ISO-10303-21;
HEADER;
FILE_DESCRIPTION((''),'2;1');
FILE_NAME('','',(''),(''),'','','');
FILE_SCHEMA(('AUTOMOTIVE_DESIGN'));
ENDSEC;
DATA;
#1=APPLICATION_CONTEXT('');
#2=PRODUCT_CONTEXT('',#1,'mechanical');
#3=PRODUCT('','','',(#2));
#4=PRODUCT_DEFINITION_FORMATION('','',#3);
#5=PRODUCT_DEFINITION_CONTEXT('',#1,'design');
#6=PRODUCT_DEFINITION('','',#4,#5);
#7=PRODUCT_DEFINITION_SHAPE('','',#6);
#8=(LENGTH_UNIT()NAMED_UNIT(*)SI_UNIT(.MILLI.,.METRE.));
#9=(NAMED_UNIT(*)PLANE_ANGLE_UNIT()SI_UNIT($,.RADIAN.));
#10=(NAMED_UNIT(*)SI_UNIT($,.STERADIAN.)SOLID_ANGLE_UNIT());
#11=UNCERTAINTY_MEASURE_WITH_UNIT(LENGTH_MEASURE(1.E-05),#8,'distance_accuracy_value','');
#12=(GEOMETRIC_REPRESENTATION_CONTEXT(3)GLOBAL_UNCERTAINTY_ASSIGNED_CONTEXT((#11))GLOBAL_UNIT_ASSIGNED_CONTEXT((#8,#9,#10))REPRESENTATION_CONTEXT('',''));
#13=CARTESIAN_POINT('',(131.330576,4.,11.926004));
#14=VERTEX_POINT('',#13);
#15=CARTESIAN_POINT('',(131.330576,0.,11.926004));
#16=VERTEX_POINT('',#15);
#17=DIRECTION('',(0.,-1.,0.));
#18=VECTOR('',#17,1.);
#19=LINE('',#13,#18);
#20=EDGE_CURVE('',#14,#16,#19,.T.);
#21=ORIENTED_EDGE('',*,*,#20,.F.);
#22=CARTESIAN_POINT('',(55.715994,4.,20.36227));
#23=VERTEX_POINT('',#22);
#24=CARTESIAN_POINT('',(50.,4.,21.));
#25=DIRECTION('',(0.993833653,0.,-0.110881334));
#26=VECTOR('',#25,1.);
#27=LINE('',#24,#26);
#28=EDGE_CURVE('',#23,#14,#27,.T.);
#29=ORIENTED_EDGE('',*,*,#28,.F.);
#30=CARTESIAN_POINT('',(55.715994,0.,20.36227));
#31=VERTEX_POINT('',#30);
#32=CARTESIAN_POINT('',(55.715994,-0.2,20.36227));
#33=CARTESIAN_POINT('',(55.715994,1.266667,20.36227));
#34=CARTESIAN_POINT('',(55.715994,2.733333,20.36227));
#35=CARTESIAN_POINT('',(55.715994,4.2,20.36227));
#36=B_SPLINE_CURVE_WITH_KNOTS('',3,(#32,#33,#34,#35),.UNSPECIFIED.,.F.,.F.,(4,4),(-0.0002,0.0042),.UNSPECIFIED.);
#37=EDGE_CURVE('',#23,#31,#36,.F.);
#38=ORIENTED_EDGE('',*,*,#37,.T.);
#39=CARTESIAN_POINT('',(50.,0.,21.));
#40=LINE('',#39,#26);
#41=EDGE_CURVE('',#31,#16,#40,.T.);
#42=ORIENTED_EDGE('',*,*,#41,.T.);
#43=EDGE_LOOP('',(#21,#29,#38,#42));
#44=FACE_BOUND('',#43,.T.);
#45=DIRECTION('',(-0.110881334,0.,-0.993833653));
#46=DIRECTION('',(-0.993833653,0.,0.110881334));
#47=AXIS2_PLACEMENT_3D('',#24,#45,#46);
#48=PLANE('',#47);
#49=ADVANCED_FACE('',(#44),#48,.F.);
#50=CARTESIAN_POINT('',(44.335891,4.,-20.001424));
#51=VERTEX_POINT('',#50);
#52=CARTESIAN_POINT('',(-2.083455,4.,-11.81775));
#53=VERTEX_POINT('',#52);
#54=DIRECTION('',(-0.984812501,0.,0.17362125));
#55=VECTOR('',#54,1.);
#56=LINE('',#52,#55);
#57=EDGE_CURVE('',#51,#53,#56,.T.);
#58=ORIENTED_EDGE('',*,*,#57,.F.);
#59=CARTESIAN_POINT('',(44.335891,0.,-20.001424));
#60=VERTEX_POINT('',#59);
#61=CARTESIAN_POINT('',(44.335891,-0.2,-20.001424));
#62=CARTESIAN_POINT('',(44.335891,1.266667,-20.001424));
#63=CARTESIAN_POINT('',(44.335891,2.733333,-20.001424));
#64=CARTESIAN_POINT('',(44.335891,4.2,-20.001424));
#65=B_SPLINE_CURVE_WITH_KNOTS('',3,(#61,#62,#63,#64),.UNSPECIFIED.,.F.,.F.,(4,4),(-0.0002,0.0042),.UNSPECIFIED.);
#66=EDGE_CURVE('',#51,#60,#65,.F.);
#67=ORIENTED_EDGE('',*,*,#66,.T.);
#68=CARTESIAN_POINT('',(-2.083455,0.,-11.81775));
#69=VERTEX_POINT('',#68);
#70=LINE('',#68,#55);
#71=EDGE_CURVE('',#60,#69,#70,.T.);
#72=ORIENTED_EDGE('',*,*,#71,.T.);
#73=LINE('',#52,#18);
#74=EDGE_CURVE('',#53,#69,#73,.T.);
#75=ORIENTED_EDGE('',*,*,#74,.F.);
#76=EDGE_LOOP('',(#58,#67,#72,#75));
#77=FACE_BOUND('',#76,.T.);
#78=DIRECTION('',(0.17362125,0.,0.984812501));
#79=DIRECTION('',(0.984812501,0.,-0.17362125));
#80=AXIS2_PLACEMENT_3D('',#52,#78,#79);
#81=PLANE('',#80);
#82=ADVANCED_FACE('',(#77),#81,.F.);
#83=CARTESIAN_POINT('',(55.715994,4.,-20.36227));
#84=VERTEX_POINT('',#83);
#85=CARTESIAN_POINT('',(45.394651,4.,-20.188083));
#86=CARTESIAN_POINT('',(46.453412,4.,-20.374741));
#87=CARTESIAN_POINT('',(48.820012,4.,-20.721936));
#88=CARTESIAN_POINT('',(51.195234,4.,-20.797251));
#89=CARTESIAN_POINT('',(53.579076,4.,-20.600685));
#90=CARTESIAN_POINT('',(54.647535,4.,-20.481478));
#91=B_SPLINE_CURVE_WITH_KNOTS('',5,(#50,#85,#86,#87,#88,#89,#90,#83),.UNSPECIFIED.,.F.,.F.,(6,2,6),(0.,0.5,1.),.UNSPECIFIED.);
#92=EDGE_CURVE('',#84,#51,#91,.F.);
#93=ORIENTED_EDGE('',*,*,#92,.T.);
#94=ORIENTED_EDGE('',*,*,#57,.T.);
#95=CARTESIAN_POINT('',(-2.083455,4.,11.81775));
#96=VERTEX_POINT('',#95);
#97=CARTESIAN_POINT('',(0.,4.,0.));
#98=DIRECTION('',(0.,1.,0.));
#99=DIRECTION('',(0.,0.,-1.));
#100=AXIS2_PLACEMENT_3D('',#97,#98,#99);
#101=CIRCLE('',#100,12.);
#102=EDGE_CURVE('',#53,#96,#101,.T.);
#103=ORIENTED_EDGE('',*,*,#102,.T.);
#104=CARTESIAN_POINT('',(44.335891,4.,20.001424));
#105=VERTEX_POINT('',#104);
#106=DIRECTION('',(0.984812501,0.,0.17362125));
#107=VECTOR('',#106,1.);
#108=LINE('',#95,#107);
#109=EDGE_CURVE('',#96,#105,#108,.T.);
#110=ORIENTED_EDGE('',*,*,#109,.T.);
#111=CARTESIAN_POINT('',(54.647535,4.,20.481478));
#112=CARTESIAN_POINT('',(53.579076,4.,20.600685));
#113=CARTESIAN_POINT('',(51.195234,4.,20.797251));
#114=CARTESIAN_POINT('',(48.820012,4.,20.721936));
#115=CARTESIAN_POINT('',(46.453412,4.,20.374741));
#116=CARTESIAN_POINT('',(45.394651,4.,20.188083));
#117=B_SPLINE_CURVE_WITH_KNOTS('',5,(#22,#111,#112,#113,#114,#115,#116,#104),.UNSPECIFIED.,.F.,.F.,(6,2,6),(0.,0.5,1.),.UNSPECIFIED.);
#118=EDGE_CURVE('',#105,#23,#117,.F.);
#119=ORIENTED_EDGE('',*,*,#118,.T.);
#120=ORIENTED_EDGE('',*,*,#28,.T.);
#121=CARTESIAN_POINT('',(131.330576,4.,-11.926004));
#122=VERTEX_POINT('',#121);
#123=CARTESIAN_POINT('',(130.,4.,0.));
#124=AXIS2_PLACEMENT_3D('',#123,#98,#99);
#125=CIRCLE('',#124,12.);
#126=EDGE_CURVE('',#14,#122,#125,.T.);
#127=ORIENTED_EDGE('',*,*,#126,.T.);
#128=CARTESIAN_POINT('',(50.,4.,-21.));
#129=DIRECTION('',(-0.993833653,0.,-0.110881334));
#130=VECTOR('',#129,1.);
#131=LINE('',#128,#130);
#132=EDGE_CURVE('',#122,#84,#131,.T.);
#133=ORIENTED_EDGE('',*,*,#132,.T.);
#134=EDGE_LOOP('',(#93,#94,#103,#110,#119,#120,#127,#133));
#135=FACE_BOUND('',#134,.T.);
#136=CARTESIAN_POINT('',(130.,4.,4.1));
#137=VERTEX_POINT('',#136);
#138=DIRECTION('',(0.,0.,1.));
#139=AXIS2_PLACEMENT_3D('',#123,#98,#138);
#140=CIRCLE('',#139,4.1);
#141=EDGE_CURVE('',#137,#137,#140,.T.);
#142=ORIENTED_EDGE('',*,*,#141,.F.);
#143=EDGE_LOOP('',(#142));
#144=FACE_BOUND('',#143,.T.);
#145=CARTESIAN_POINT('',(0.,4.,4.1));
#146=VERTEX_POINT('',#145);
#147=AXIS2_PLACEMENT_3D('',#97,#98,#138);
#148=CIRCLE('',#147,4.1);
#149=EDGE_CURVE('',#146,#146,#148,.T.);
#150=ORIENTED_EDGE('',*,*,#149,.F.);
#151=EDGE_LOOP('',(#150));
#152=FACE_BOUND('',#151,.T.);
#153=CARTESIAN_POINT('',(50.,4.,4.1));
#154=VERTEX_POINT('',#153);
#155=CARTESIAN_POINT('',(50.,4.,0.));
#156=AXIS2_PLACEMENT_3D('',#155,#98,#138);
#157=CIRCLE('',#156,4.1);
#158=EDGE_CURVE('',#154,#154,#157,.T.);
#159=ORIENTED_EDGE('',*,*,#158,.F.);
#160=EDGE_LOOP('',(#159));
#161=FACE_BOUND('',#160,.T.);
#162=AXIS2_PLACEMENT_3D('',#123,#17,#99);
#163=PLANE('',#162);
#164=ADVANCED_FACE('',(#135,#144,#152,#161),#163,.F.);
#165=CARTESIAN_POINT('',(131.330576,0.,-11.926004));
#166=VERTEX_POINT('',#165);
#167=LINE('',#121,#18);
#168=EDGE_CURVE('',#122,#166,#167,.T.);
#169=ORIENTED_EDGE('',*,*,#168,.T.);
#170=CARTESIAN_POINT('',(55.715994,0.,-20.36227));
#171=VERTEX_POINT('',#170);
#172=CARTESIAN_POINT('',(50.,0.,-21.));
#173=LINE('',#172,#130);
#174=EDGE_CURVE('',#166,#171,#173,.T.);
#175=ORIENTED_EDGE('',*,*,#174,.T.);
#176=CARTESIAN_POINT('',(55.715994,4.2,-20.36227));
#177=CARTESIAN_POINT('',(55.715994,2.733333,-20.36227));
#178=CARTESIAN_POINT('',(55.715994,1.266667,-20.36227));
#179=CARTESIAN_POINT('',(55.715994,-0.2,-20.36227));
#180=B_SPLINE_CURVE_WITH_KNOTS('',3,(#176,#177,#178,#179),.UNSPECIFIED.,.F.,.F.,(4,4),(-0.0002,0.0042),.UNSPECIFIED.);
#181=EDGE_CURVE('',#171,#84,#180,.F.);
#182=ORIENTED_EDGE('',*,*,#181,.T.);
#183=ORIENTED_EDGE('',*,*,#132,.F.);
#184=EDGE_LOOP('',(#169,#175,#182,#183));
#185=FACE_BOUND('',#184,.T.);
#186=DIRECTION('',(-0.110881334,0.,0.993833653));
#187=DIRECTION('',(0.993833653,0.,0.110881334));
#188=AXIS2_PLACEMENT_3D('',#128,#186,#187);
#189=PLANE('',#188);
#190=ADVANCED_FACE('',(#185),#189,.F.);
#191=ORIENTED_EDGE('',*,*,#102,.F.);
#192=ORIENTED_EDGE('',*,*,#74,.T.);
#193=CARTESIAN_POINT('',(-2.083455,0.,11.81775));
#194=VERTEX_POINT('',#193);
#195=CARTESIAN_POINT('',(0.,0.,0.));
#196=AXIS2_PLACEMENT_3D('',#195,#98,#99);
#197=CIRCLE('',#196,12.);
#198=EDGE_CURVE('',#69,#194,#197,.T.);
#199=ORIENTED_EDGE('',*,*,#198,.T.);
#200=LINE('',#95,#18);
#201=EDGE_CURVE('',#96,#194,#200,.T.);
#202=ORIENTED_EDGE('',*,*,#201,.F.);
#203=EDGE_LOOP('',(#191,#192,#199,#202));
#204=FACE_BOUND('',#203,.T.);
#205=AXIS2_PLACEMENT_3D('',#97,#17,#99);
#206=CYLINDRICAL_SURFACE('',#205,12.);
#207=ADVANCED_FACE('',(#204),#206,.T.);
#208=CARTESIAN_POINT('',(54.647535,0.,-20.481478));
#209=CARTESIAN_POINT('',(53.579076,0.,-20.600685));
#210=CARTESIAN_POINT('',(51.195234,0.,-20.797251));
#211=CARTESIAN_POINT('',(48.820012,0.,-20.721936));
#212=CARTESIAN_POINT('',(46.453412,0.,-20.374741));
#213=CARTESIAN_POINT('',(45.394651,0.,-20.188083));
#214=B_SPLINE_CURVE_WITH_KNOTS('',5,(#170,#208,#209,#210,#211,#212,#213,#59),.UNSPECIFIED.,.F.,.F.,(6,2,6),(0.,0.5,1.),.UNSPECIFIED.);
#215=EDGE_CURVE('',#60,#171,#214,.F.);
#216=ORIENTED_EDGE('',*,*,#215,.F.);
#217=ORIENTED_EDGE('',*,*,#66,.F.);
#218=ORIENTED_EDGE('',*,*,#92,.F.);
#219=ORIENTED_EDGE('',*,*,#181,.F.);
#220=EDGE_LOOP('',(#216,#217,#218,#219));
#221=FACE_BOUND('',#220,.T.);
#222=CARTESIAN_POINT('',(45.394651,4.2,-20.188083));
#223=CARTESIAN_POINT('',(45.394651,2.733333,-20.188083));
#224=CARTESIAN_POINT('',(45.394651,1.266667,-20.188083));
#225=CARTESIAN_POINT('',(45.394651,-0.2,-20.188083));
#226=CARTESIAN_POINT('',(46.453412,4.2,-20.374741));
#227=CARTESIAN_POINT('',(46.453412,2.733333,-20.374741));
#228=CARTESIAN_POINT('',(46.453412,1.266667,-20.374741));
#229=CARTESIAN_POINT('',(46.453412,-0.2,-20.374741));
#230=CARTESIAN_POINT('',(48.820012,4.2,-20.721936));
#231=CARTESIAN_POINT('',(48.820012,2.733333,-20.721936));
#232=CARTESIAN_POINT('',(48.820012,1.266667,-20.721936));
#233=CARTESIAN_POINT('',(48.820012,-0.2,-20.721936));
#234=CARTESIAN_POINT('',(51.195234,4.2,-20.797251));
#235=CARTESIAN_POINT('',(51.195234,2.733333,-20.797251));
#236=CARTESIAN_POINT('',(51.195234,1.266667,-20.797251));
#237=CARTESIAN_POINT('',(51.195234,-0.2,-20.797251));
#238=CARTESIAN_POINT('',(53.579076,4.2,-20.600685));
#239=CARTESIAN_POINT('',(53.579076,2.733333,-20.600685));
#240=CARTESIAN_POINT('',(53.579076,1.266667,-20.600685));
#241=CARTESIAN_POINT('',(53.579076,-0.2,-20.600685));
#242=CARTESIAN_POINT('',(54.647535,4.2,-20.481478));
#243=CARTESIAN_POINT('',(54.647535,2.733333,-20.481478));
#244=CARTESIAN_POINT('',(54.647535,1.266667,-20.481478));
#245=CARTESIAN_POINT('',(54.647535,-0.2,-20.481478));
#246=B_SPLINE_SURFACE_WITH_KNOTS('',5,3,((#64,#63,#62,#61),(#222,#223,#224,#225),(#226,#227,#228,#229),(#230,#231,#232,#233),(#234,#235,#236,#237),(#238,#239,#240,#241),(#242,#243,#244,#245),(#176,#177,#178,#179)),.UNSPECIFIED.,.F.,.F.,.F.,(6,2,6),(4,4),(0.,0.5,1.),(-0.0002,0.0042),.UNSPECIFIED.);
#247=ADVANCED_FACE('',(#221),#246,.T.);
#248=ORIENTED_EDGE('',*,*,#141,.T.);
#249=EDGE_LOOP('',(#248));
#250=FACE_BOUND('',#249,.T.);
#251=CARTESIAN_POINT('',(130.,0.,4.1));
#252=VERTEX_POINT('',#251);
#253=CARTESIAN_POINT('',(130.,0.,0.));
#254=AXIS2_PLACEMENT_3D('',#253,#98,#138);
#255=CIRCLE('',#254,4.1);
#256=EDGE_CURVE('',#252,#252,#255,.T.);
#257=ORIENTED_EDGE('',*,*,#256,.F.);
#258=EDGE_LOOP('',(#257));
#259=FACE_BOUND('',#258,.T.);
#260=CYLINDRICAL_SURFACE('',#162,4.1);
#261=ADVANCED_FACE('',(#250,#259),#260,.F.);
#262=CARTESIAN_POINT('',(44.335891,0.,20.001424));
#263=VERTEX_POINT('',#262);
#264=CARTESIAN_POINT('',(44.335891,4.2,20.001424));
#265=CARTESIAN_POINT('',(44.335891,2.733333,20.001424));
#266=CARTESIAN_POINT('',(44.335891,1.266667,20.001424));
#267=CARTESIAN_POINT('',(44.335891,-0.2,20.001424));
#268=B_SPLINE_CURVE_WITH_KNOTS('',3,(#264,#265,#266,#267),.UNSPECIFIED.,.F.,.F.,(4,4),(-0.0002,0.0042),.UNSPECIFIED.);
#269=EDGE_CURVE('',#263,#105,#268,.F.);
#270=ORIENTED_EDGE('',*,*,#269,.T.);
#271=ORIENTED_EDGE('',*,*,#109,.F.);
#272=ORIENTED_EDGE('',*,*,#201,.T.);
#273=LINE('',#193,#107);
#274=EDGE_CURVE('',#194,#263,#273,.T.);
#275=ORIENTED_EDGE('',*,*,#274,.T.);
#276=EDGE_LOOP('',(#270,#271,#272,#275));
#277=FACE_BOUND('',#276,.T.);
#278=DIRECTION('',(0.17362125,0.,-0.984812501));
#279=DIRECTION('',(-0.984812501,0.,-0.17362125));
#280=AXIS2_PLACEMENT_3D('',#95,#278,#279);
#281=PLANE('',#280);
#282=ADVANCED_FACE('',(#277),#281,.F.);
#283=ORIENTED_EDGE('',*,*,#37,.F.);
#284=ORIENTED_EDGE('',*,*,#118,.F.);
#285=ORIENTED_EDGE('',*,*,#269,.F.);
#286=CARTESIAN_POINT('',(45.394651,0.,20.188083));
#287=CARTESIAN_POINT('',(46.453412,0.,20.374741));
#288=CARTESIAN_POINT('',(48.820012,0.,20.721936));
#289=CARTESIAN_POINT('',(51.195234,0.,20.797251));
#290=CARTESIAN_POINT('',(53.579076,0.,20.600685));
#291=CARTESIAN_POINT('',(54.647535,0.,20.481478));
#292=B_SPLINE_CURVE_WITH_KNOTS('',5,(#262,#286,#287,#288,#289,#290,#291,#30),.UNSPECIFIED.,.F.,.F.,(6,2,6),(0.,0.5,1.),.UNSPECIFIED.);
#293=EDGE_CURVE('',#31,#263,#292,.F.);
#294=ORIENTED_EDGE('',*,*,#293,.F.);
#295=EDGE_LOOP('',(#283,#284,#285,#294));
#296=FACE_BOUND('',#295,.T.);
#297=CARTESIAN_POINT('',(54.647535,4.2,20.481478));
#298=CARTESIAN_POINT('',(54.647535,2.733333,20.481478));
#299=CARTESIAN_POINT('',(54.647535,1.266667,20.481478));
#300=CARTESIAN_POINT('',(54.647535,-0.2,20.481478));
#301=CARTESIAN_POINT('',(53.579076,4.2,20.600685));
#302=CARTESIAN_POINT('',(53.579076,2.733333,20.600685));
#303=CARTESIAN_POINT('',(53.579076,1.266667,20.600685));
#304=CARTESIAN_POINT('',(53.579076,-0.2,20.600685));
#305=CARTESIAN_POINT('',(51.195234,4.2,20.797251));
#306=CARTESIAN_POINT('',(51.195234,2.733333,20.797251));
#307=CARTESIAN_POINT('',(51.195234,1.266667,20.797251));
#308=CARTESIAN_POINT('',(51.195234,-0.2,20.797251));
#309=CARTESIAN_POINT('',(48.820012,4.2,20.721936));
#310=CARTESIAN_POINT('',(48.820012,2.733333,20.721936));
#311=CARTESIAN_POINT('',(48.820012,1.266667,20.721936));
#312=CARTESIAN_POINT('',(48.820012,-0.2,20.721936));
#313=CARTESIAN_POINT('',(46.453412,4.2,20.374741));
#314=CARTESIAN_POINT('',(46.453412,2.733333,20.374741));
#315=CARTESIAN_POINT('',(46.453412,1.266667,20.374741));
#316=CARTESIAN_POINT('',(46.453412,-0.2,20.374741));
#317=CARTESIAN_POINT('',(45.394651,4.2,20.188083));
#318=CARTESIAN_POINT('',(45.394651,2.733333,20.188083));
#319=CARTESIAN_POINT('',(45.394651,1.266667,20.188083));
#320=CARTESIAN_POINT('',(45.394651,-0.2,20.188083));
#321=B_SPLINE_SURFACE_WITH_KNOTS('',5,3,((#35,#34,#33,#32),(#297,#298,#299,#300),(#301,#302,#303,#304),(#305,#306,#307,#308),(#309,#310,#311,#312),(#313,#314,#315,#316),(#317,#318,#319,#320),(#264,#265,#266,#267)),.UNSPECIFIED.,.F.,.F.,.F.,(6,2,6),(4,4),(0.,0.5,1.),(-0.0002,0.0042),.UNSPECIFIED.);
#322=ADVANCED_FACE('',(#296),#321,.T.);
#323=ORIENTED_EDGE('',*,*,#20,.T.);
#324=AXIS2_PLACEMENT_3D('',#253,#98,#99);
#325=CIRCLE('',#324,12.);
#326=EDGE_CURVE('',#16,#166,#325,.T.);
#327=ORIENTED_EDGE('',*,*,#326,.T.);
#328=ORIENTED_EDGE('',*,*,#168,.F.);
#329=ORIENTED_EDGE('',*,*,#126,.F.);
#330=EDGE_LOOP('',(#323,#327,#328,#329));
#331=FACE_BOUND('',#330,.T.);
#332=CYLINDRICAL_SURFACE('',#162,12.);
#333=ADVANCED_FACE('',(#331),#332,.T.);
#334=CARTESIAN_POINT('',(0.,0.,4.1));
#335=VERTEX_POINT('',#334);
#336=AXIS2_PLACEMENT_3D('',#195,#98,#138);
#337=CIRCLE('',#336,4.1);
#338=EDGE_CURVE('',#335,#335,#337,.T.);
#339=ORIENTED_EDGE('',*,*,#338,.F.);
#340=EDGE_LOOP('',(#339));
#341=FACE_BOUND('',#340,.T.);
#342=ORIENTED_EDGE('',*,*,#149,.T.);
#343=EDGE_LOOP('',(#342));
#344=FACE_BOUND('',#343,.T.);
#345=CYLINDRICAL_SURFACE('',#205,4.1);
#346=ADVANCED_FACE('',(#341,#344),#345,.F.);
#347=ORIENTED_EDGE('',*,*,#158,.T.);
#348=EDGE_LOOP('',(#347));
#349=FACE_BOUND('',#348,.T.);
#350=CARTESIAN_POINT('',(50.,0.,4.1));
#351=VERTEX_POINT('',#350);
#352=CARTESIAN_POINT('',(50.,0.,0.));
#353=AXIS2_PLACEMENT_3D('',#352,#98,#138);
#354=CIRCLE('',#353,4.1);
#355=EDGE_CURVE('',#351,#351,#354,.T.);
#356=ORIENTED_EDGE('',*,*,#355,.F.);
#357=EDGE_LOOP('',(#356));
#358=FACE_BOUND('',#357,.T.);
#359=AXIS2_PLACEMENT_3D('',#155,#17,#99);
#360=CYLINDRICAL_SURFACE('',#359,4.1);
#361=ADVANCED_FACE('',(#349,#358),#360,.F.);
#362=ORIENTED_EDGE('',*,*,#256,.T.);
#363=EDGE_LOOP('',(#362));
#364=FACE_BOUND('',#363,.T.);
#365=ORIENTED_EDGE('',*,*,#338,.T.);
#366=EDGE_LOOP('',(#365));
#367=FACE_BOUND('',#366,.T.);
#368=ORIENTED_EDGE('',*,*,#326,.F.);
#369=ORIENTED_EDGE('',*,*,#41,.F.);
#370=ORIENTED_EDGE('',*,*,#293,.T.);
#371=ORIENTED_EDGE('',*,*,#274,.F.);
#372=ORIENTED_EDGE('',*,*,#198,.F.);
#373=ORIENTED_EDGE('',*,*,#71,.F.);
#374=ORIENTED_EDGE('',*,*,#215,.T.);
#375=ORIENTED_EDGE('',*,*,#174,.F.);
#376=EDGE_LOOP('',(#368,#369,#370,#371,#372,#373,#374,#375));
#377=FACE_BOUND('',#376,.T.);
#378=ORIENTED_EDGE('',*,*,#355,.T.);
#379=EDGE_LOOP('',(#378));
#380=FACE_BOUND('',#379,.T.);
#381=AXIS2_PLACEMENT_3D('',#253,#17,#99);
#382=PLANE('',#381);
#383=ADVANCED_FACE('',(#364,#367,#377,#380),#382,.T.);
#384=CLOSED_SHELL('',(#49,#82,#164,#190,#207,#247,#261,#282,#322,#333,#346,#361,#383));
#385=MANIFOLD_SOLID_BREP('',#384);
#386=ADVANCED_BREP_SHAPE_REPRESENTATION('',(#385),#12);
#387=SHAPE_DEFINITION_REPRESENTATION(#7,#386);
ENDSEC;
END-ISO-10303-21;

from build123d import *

# Parameters (mm, degrees)
SKETCH_1_R      = 4.1
EXTRUDE_1_DEPTH = 4


with BuildPart() as part:
    # 草图1 → 凸台-拉伸1 (new body)
    with BuildSketch(Plane(origin=(0, 0, 0), x_dir=(1, 0, 0), z_dir=(0, 1, 0))):
        with BuildLine():
            Line((-2.083455003, 11.817750008), (50, 21))
            Line((50, 21), (131.330576007, 11.926003836))
            ThreePointArc((131.330576007, 11.926003836), (142, 0), (131.330576007, -11.926003836))
            Line((131.330576007, -11.926003836), (50, -21))
            Line((50, -21), (-2.083455003, -11.817750008))
            ThreePointArc((-2.083455003, -11.817750008), (-12, 0), (-2.083455003, 11.817750008))
        make_face()
        with Locations(Location((0, 0, 0), (0, 0, 270))):
            Circle(SKETCH_1_R, mode=Mode.SUBTRACT)
        with Locations(Location((50, 0, 0), (0, 0, 270))):
            Circle(SKETCH_1_R, mode=Mode.SUBTRACT)
        with Locations(Location((130, 0, 0), (0, 0, 270))):
            Circle(SKETCH_1_R, mode=Mode.SUBTRACT)
    extrude(amount=EXTRUDE_1_DEPTH)

    # 圆角1
    # a fillet whose section is not a circle: 40 mm, written as the material it takes off along each edge
    with BuildSketch(Plane(origin=(50, -14.378648939, 21), x_dir=(0.9938336529777407, 0, -0.11088133390665686), z_dir=(0, 1, 0)), Plane(origin=(50, -14.378648939, -21), x_dir=(-0.9848125006580993, 0, 0.17362125027640163), z_dir=(0, 1, 0))) as fillet_1_piece_1:
        with BuildLine():
            add(Edge.make_bspline([(5.751459576, 0), (4.676371086, 0), (3.601282597, 0), (1.210344489, 0.06897002), (-1.141879394, 0.407188034), (-3.455389054, 1.014654044), (-4.486924042, 1.317558038), (-5.518459029, 1.620462032)], knots=[0, 0, 0, 0, 0, 0, 0.5, 0.5, 1, 1, 1, 1, 1, 1], degree=5))
            Line((-5.518459029, 1.620462032), (0, 0))
            Line((0, 0), (5.751459576, 0))
        make_face()
    extrude(amount=32.757297879, mode=Mode.SUBTRACT)


solid = part.part
